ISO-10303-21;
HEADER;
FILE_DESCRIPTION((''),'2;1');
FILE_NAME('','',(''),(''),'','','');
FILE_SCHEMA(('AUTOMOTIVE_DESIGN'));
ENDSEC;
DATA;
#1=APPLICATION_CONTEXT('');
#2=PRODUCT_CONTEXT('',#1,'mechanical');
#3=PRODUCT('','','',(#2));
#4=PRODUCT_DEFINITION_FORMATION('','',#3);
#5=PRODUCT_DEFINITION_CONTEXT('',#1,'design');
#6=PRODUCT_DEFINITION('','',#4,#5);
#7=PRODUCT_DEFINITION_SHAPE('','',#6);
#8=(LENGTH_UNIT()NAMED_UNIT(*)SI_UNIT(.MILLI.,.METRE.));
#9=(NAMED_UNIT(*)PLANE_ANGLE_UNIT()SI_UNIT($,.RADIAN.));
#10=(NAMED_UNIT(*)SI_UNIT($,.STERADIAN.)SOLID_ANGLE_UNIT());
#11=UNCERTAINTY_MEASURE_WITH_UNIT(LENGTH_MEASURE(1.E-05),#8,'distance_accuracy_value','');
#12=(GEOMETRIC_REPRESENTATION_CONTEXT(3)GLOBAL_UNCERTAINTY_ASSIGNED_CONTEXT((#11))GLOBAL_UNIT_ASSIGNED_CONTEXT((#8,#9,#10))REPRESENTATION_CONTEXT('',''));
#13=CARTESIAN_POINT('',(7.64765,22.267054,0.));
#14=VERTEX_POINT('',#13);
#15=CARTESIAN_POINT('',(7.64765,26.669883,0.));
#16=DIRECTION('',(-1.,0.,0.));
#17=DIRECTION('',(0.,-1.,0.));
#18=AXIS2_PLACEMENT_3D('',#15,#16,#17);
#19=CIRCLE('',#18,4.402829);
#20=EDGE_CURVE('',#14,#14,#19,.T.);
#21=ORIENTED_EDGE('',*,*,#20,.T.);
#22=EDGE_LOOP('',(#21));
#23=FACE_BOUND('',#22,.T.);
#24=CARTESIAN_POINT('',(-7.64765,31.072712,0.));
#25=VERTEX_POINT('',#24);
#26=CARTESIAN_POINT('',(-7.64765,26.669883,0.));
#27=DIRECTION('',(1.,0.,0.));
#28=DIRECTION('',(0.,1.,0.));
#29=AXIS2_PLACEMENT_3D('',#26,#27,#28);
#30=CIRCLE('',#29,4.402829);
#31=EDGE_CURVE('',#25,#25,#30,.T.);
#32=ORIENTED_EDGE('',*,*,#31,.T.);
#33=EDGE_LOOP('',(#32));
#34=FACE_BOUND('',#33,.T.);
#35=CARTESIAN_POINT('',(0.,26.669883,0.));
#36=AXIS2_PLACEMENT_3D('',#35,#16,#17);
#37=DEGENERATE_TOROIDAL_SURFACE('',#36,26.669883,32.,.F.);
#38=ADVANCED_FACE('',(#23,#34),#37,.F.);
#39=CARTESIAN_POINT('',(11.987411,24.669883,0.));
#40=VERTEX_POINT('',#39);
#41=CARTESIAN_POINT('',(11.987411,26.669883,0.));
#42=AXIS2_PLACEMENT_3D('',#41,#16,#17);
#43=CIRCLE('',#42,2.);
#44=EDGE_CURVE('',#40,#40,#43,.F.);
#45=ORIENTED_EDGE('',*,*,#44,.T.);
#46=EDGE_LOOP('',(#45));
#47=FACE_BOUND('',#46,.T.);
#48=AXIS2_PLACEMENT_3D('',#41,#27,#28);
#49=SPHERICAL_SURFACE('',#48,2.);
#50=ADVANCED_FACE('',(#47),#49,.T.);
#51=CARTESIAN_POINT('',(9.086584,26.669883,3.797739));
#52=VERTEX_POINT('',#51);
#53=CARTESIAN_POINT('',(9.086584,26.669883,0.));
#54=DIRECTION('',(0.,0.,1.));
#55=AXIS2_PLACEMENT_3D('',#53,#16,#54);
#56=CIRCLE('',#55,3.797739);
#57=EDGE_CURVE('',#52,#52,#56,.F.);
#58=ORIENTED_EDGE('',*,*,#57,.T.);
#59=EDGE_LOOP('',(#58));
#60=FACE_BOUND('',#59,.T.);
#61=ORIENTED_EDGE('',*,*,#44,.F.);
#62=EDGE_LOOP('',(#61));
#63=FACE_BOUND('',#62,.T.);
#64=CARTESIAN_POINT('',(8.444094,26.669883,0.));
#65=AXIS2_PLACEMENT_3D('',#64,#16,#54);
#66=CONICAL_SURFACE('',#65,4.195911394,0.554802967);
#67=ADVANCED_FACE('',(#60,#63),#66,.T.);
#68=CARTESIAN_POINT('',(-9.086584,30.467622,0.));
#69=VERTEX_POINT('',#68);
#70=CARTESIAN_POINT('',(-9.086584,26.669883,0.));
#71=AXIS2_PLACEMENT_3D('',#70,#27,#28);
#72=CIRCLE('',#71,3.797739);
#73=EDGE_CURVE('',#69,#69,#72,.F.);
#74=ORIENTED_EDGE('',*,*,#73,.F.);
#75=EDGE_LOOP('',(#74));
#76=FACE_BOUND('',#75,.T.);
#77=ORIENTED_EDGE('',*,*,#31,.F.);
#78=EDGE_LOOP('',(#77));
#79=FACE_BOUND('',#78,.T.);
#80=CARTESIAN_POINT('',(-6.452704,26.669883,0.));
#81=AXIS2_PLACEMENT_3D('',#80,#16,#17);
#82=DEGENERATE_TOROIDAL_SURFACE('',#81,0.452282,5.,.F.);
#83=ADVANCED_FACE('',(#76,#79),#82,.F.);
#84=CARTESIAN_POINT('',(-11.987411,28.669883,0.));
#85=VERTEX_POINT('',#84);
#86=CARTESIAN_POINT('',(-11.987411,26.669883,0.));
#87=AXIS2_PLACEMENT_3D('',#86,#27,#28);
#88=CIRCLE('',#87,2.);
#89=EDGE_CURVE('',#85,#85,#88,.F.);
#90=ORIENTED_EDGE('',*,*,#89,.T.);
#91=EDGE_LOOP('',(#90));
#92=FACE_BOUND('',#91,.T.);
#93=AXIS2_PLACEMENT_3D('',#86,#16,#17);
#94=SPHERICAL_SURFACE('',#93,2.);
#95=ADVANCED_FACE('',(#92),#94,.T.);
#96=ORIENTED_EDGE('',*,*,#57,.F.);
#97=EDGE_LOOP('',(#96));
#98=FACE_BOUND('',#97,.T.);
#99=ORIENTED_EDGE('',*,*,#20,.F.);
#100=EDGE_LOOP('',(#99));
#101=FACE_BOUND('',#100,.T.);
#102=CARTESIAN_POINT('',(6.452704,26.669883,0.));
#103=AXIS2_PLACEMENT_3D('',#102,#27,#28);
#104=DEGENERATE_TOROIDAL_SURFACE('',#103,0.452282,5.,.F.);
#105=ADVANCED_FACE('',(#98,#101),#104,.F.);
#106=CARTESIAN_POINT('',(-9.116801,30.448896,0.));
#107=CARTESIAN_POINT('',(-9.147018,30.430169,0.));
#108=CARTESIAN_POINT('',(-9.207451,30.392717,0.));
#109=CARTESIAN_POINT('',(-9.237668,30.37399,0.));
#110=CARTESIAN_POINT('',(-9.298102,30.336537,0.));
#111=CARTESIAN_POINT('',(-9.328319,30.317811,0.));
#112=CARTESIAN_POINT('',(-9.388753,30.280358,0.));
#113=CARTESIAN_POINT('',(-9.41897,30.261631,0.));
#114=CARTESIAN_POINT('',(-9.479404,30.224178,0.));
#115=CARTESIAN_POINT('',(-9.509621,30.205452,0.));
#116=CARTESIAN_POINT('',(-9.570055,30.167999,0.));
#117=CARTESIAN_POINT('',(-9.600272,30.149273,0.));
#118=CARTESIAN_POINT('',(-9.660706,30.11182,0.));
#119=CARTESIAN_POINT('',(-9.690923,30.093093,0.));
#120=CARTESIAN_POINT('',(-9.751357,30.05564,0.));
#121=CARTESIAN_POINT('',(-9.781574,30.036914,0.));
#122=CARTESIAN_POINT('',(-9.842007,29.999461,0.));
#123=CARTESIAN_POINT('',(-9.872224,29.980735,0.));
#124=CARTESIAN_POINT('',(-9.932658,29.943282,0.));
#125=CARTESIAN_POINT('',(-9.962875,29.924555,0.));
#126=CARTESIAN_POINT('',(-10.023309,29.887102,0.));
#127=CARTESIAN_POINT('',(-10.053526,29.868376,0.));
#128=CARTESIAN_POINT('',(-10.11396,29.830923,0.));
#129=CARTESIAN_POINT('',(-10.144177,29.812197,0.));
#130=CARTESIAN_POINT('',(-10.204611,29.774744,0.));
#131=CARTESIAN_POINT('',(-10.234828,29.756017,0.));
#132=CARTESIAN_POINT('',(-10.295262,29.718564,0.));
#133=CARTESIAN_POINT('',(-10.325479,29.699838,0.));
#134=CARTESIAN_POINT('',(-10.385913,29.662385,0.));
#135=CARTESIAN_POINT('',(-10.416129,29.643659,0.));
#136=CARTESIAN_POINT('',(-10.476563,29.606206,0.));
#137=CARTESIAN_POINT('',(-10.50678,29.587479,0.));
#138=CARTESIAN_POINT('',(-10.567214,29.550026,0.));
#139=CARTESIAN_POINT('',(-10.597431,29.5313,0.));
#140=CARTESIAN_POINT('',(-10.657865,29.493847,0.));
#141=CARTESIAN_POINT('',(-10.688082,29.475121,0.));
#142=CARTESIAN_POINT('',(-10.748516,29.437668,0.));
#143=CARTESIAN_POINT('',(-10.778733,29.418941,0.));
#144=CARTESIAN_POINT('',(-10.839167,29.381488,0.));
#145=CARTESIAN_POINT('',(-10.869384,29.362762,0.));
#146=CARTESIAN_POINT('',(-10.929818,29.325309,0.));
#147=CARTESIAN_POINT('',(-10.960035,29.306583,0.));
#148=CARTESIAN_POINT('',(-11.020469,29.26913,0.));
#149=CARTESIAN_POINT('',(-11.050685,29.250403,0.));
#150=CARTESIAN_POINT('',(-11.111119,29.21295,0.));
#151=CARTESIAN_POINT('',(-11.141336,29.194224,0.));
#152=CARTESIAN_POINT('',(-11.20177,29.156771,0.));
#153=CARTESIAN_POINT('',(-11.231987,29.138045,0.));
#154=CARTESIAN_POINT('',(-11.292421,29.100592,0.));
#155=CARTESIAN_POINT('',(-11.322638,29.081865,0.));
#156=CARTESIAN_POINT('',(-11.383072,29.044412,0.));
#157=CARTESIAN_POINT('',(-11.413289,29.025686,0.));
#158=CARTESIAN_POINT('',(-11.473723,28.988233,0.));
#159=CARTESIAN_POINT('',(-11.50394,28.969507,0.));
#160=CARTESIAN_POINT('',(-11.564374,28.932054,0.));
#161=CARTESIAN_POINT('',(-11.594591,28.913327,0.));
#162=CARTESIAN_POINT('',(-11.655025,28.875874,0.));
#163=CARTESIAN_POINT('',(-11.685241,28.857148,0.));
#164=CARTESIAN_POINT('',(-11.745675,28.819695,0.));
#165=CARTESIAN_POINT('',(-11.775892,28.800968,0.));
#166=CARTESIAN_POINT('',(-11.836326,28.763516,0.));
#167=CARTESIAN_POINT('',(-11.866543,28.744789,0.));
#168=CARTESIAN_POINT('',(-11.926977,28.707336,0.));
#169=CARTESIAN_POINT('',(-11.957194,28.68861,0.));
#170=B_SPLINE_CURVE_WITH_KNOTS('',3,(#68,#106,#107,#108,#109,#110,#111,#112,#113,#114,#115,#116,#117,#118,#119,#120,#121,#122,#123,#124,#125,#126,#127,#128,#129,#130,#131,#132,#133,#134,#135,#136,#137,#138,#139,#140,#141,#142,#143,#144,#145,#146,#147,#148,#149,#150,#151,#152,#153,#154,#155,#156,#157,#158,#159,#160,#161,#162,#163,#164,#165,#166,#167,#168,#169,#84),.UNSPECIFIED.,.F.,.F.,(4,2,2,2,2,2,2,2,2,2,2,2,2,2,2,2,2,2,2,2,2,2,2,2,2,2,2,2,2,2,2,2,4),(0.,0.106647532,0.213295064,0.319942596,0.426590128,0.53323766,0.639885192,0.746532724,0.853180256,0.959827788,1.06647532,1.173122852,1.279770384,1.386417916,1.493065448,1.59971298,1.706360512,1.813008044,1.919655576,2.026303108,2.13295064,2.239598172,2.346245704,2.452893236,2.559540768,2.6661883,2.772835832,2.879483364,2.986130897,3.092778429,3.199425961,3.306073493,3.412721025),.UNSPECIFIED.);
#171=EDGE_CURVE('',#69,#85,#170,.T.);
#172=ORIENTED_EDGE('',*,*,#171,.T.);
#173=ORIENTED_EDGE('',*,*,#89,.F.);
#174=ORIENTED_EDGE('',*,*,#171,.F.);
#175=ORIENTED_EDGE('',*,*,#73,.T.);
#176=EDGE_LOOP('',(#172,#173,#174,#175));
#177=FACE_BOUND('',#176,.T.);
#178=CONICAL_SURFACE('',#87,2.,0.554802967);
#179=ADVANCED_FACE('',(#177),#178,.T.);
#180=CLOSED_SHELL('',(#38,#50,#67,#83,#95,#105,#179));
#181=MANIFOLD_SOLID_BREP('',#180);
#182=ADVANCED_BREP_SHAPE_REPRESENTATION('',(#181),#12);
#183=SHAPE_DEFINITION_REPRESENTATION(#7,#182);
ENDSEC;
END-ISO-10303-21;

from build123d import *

# Parameters (mm, degrees)
FASE1_SIZE                      = 1
FASE2_SIZE                      = 1
SKIZZE4_R                       = 2
AUFSATZ_LINEAR_AUSTRAGEN2_DEPTH = 2
VERRUNDUNG6_R                   = 2
AUFSATZ_LINEAR_START            = 2
SKIZZE5_R                       = 2
AUFSATZ_LINEAR_AUSTRAGEN3_DEPTH = 2
VERRUNDUNG7_R                   = 2
VERRUNDUNG8_R                   = 5


# Some blends are built 0.0001 mm under size
with BuildPart() as part:
    # Skizze2 → Rotation1 (revolve)
    with BuildSketch(Plane.XY, mode=Mode.PRIVATE) as rotation1_sk:
        with BuildLine():
            Line((-11.987410989, 29.669883346), (-11.987410989, 26.669883346))
            Line((-11.987410989, 26.669883346), (11.987410989, 26.669883346))
            Line((11.987410989, 26.669883346), (11.987410989, 29.669883346))
            ThreePointArc((11.987410989, 29.669883346), (0, 32), (-11.987410989, 29.669883346))
        make_face()
    revolve(rotation1_sk.sketch.rotate(Axis((-11.987410989, 26.669883346, 0), (1, 0, 0)), 180), axis=Axis((-11.987410989, 26.669883346, 0), (1, 0, 0)))

    # Fase1
    # the kernel refuses this chamfer: 5, 1 mm, written as the material it takes off along each edge
    with BuildSketch(Plane(origin=(-11.987410989, 26.669883346, 0), x_dir=(0, -1, 0), z_dir=(0, 0, 1))) as fase1_piece_1:
        with BuildLine():
            Line((4.195911394, 3.543317486), (3 - FASE1_SIZE, 0))
            Line((3 - FASE1_SIZE, 0), (3, 0))
            ThreePointArc((3, 0), (3.680793528, 1.846581965), (4.195911394, 3.543317486))
        make_face()
    revolve(axis=Axis((-11.987410989, 26.669883346, 0), (1, 0, 0)), mode=Mode.SUBTRACT)

    # Fase2
    # the kernel refuses this chamfer: 5, 1 mm, written as the material it takes off along each edge
    with BuildSketch(Plane(origin=(11.987410989, 26.669883346, 0), x_dir=(0, -1, 0), z_dir=(0, 0, 1))) as fase2_piece_1:
        with BuildLine():
            Line((4.195911394, -3.543317486), (3 - FASE2_SIZE, 0))
            Line((3 - FASE2_SIZE, 0), (3, 0))
            ThreePointArc((3, 0), (3.680793528, -1.846581965), (4.195911394, -3.543317486))
        make_face()
    revolve(axis=Axis((11.987410989, 26.669883346, 0), (1, 0, 0)), mode=Mode.SUBTRACT)

    # Skizze4 → Aufsatz-Linear austragen2 (add)
    with BuildSketch(Plane.ZY.offset(11.987410989)):
        with Locations(Location((0, 26.669883346, 0), (0, 0, 90))):
            Circle(SKIZZE4_R)
    extrude(amount=AUFSATZ_LINEAR_AUSTRAGEN2_DEPTH)

    # Verrundung6
    verrundung6_edges = [part.edges().sort_by_distance(p)[0] for p in [
        (-13.987410989, 24.669883346, 0),
    ]]
    fillet(verrundung6_edges, radius=VERRUNDUNG6_R - 0.0001)  # a hair under: the kernel refuses the full size

    # Skizze5 → Aufsatz-Linear austragen3 (add)
    with BuildSketch(Plane(origin=(11.987410989, 0, 0), x_dir=(0, 0, -1), z_dir=(1, 0, 0)).offset(AUFSATZ_LINEAR_START)):
        with Locations(Location((0, 26.669883346, 0), (0, 0, 270))):
            Circle(SKIZZE5_R)
    extrude(amount=-AUFSATZ_LINEAR_AUSTRAGEN3_DEPTH)

    # Verrundung7
    verrundung7_edges = [part.edges().sort_by_distance(p)[0] for p in [
        (13.987410989, 28.669883346, 0),
    ]]
    fillet(verrundung7_edges, radius=VERRUNDUNG7_R - 0.0001)  # a hair under: the kernel refuses the full size

    # Verrundung8
    verrundung8_edges = [part.edges().sort_by_distance(p)[0] for p in [
        (-8.444093503, 30.86579474, 0),
        (8.444093503, 30.86579474, 0),
    ]]
    fillet(verrundung8_edges, radius=VERRUNDUNG8_R)


solid = part.part
